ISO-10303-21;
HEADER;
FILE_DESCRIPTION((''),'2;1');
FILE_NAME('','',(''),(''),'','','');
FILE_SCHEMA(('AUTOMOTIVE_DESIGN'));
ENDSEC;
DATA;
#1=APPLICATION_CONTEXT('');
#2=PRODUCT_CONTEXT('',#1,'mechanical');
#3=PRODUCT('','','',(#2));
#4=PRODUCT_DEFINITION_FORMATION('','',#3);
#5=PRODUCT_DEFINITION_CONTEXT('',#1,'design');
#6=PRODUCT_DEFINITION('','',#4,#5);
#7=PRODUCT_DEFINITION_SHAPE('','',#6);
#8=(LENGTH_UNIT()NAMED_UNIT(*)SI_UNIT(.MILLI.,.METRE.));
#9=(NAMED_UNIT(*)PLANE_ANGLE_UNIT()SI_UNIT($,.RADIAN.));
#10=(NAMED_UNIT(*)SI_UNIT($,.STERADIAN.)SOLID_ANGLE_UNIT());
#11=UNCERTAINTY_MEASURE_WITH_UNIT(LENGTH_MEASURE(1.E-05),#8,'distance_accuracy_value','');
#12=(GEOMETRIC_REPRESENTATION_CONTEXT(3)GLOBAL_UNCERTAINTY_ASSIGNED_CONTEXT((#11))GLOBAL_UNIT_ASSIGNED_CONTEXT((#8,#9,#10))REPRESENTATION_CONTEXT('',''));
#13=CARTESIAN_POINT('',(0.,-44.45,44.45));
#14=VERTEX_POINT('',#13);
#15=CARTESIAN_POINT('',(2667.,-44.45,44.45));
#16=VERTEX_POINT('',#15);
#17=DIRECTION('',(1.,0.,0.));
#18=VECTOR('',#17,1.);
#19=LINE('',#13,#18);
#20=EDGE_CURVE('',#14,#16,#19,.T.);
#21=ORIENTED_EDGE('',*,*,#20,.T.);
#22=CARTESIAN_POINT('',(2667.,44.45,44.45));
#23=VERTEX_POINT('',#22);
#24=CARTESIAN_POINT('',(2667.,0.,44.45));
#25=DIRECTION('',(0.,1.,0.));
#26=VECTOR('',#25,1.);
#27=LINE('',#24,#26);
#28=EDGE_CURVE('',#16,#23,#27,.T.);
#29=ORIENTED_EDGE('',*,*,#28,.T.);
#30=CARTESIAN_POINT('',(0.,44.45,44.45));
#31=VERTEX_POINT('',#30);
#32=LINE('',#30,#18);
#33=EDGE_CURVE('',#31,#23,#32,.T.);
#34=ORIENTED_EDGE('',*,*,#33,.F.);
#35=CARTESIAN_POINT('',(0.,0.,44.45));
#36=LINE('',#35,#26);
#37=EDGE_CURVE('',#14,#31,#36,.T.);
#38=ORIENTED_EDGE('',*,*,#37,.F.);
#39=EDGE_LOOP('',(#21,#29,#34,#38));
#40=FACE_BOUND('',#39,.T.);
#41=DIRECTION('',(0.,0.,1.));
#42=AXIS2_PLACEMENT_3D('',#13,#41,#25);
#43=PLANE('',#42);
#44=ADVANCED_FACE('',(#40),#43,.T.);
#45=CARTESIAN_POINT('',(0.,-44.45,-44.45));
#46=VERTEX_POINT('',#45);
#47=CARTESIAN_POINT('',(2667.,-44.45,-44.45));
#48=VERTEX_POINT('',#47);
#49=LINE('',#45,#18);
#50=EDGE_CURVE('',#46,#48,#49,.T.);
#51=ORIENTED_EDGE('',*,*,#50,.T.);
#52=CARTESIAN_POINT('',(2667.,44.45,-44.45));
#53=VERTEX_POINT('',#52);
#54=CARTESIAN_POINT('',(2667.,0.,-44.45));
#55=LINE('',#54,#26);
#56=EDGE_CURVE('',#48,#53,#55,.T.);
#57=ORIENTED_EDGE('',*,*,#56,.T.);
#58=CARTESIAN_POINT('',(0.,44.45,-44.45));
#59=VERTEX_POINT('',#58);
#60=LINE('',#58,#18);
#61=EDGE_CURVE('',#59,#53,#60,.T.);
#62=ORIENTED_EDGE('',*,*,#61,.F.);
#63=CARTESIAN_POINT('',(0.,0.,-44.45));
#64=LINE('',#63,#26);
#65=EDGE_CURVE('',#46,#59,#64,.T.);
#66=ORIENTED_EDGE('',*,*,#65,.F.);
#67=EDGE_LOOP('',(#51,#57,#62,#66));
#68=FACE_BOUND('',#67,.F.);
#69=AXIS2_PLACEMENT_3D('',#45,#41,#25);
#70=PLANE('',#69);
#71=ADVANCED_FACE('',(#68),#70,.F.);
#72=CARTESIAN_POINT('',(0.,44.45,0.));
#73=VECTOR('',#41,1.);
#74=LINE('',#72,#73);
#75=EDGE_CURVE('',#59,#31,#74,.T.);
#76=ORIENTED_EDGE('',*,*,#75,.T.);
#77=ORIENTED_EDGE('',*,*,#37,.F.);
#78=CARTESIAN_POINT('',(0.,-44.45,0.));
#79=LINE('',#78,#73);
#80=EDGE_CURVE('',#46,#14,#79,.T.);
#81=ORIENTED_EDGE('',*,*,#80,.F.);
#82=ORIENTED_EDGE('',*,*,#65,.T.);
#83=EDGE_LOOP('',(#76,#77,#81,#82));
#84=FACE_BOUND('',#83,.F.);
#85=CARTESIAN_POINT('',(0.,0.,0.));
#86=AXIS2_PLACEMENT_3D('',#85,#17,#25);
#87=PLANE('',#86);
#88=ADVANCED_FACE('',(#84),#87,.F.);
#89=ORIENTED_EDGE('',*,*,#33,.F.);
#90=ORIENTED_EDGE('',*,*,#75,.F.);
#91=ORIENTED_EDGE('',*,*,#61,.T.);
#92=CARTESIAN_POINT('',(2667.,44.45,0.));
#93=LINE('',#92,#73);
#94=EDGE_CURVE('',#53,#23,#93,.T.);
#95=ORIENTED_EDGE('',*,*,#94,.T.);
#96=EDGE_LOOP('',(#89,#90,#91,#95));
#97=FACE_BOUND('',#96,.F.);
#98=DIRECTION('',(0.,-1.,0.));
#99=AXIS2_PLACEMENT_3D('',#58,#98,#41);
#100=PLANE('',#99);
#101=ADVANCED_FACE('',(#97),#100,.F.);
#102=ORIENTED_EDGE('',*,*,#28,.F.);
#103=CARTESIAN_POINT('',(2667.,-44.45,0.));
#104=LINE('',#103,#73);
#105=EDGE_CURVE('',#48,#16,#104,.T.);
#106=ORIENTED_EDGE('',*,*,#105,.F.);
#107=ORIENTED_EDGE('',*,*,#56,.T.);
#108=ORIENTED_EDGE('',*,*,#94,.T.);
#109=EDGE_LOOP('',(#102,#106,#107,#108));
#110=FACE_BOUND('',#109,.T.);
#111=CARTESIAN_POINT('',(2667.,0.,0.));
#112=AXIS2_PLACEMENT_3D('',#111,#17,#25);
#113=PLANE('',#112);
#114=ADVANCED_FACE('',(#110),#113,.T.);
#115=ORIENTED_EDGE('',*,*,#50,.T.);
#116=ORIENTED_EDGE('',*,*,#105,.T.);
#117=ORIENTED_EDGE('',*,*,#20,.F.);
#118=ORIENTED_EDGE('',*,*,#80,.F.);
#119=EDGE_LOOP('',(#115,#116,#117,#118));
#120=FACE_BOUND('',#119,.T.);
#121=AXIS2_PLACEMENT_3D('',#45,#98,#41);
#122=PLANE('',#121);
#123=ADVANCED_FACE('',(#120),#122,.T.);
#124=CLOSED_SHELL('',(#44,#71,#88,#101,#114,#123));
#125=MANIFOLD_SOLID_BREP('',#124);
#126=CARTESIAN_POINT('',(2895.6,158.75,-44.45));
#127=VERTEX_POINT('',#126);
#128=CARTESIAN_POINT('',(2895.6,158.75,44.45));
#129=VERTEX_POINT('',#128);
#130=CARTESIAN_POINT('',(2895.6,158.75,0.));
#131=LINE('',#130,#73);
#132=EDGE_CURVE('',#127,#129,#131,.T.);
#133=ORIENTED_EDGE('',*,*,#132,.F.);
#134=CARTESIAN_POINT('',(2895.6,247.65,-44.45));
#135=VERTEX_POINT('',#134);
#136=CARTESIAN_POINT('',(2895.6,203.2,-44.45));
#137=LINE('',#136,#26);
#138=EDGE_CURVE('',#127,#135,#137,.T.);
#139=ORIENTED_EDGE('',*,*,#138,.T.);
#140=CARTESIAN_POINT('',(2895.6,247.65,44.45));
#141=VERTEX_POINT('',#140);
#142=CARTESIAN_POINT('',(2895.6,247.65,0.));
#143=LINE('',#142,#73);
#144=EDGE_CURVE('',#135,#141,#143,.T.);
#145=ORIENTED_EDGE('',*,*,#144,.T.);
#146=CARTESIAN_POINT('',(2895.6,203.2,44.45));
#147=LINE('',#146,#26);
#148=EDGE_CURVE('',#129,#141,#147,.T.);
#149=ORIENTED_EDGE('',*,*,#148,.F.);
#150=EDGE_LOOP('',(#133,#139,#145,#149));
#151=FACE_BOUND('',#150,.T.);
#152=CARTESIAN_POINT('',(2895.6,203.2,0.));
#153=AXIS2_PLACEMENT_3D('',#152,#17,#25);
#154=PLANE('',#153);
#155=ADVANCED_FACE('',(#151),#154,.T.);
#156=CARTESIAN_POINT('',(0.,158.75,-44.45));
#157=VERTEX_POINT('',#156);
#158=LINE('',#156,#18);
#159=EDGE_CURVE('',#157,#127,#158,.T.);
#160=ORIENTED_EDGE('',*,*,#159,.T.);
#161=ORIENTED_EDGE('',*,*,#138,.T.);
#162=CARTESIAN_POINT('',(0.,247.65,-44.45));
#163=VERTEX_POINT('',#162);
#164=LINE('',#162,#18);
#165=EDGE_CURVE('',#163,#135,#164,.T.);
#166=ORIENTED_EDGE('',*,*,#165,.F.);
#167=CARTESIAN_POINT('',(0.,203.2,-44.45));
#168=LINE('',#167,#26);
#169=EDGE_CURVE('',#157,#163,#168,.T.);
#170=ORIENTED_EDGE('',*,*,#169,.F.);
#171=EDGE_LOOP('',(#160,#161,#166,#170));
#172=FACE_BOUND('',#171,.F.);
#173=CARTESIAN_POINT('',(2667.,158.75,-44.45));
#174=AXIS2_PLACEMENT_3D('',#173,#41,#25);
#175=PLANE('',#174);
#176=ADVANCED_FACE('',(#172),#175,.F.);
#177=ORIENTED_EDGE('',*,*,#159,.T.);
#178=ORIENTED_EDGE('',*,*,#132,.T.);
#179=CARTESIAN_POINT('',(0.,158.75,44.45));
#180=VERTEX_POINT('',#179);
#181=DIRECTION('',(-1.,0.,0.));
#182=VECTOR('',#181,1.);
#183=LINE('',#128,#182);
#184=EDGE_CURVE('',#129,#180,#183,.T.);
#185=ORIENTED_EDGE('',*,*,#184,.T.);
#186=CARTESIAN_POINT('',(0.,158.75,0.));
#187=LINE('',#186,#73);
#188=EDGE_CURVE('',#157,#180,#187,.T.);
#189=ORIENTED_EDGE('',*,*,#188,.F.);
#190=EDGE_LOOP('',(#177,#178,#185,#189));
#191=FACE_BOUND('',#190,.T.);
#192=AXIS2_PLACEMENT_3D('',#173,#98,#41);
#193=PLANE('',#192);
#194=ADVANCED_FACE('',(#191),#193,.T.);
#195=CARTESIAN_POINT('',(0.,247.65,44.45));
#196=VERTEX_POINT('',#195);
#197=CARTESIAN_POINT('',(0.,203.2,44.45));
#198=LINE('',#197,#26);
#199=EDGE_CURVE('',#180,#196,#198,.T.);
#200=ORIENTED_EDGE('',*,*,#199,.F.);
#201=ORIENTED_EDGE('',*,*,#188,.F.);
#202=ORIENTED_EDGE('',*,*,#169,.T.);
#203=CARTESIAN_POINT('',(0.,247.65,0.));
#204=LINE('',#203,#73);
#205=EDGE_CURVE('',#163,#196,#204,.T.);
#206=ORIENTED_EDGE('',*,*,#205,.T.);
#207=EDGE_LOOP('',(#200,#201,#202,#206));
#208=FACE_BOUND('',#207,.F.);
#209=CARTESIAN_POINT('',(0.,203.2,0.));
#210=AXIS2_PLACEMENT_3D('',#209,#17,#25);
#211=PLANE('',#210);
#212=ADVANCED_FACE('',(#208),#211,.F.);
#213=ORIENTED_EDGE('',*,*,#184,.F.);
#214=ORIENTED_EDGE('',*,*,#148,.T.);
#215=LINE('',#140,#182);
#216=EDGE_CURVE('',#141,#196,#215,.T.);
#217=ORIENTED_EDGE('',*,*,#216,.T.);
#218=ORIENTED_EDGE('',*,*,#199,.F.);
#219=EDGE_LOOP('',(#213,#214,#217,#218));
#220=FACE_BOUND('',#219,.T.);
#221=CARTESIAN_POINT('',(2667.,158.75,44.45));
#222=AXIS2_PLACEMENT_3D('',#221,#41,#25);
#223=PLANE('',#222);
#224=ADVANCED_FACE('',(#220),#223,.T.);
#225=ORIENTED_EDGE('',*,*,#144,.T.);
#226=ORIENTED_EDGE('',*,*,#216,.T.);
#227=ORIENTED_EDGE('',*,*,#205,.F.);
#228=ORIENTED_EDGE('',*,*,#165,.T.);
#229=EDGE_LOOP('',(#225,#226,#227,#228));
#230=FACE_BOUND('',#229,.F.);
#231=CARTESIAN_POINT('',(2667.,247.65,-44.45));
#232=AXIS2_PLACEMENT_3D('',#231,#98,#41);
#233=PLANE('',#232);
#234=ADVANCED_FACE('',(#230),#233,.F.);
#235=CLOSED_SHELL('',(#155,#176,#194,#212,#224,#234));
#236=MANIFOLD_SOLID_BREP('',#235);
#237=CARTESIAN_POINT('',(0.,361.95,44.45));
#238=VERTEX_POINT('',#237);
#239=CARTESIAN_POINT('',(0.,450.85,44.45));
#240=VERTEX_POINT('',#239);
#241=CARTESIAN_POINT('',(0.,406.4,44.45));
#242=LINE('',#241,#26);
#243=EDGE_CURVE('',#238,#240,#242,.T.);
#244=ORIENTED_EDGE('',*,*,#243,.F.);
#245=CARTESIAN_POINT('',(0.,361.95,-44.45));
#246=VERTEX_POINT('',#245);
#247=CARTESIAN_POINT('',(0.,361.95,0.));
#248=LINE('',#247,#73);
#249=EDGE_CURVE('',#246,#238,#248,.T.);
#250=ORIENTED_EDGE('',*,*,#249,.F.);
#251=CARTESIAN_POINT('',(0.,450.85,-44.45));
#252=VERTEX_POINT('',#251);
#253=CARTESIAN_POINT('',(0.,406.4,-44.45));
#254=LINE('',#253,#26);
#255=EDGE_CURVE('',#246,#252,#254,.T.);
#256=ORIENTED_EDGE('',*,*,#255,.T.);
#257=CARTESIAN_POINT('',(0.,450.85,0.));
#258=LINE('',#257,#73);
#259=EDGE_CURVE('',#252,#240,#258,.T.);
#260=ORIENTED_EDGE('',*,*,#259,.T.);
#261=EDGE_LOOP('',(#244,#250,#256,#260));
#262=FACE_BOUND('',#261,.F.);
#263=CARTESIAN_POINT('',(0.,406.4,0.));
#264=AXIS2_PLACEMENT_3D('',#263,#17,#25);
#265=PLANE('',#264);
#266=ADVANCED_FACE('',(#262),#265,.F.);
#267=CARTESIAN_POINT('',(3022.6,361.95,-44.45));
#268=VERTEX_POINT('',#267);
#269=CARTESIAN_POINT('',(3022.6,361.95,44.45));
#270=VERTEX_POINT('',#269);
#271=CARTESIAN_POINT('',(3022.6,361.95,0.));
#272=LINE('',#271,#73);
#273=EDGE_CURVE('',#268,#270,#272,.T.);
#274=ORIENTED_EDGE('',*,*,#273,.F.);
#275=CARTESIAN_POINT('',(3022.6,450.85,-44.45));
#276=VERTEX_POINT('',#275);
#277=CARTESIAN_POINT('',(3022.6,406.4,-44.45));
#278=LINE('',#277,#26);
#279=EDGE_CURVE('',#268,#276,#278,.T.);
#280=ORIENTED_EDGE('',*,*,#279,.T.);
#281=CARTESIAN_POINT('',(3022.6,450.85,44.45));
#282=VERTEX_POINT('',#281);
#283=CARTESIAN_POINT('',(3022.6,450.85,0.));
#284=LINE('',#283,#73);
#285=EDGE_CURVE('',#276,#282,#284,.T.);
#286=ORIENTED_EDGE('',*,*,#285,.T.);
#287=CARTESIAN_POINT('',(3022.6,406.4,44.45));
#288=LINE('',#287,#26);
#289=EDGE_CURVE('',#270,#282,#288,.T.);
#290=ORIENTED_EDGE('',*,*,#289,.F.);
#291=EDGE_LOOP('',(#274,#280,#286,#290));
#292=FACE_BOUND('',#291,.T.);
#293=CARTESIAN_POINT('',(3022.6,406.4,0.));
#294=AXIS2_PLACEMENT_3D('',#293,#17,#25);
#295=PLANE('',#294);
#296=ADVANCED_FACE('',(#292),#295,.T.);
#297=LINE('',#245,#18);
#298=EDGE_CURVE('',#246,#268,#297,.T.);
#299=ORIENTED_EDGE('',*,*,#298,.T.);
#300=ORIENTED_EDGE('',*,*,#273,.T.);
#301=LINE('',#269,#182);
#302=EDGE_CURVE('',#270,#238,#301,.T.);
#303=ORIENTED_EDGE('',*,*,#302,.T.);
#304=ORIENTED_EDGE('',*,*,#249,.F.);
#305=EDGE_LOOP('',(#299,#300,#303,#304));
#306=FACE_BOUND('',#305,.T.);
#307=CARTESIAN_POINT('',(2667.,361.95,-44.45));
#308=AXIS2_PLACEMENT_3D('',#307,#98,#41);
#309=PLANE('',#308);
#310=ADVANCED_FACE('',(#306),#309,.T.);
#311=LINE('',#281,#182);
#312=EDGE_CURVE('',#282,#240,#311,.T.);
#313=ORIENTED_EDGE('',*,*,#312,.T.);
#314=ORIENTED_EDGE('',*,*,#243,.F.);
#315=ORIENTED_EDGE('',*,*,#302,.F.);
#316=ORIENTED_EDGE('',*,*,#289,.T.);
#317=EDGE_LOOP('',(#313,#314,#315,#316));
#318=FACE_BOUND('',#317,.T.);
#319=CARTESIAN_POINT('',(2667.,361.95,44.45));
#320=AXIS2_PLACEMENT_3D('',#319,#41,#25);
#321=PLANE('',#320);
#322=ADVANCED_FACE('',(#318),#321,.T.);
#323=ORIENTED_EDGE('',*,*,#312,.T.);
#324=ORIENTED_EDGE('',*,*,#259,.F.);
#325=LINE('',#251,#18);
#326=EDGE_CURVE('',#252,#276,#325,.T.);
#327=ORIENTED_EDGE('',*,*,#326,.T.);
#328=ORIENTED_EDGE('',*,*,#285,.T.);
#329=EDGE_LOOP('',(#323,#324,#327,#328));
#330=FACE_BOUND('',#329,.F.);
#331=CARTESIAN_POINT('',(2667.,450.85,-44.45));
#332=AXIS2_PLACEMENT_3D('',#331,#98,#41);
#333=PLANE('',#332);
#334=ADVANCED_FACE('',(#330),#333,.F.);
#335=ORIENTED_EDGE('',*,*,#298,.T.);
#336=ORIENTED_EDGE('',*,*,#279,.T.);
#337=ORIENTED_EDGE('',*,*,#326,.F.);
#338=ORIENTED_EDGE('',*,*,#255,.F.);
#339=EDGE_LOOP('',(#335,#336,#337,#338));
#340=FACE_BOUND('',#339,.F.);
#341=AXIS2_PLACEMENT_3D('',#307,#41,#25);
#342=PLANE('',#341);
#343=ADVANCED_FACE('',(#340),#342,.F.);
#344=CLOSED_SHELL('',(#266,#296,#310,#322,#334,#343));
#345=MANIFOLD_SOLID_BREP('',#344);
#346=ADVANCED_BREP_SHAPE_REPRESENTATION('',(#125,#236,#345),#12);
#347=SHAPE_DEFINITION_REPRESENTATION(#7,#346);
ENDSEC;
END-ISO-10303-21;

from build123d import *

# Parameters (mm, degrees)
F0_W     = 88.9
F0_H     = 88.9
F1_DEPTH = 2667
F3_DEPTH = 228.6
F5_DEPTH = 355.6


with BuildPart() as f1:
    # F0 (on Right) → F1 (new body)
    with BuildSketch(Plane.YZ):
        Rectangle(F0_W, F0_H)
    extrude(amount=F1_DEPTH)


with BuildPart() as f2_1:
    # F2: copy of F1
    add(f1.part.moved(Location((0, 203.2, 0))))

    # F3 (add): a face of the model
    f3_faces = [f2_1.faces().sort_by_distance(p)[0] for p in [
        (2667, 203.2, 0),
    ]]
    extrude(f3_faces, amount=F3_DEPTH)


with BuildPart() as f4_1:
    # F4: copy of F1
    add(f1.part.moved(Location((0, 406.4, 0))))

    # F5 (add): a face of the model
    f5_faces = [f4_1.faces().sort_by_distance(p)[0] for p in [
        (2667, 406.4, 0),
    ]]
    extrude(f5_faces, amount=F5_DEPTH)


solid = Compound([f1.part, f2_1.part, f4_1.part])
